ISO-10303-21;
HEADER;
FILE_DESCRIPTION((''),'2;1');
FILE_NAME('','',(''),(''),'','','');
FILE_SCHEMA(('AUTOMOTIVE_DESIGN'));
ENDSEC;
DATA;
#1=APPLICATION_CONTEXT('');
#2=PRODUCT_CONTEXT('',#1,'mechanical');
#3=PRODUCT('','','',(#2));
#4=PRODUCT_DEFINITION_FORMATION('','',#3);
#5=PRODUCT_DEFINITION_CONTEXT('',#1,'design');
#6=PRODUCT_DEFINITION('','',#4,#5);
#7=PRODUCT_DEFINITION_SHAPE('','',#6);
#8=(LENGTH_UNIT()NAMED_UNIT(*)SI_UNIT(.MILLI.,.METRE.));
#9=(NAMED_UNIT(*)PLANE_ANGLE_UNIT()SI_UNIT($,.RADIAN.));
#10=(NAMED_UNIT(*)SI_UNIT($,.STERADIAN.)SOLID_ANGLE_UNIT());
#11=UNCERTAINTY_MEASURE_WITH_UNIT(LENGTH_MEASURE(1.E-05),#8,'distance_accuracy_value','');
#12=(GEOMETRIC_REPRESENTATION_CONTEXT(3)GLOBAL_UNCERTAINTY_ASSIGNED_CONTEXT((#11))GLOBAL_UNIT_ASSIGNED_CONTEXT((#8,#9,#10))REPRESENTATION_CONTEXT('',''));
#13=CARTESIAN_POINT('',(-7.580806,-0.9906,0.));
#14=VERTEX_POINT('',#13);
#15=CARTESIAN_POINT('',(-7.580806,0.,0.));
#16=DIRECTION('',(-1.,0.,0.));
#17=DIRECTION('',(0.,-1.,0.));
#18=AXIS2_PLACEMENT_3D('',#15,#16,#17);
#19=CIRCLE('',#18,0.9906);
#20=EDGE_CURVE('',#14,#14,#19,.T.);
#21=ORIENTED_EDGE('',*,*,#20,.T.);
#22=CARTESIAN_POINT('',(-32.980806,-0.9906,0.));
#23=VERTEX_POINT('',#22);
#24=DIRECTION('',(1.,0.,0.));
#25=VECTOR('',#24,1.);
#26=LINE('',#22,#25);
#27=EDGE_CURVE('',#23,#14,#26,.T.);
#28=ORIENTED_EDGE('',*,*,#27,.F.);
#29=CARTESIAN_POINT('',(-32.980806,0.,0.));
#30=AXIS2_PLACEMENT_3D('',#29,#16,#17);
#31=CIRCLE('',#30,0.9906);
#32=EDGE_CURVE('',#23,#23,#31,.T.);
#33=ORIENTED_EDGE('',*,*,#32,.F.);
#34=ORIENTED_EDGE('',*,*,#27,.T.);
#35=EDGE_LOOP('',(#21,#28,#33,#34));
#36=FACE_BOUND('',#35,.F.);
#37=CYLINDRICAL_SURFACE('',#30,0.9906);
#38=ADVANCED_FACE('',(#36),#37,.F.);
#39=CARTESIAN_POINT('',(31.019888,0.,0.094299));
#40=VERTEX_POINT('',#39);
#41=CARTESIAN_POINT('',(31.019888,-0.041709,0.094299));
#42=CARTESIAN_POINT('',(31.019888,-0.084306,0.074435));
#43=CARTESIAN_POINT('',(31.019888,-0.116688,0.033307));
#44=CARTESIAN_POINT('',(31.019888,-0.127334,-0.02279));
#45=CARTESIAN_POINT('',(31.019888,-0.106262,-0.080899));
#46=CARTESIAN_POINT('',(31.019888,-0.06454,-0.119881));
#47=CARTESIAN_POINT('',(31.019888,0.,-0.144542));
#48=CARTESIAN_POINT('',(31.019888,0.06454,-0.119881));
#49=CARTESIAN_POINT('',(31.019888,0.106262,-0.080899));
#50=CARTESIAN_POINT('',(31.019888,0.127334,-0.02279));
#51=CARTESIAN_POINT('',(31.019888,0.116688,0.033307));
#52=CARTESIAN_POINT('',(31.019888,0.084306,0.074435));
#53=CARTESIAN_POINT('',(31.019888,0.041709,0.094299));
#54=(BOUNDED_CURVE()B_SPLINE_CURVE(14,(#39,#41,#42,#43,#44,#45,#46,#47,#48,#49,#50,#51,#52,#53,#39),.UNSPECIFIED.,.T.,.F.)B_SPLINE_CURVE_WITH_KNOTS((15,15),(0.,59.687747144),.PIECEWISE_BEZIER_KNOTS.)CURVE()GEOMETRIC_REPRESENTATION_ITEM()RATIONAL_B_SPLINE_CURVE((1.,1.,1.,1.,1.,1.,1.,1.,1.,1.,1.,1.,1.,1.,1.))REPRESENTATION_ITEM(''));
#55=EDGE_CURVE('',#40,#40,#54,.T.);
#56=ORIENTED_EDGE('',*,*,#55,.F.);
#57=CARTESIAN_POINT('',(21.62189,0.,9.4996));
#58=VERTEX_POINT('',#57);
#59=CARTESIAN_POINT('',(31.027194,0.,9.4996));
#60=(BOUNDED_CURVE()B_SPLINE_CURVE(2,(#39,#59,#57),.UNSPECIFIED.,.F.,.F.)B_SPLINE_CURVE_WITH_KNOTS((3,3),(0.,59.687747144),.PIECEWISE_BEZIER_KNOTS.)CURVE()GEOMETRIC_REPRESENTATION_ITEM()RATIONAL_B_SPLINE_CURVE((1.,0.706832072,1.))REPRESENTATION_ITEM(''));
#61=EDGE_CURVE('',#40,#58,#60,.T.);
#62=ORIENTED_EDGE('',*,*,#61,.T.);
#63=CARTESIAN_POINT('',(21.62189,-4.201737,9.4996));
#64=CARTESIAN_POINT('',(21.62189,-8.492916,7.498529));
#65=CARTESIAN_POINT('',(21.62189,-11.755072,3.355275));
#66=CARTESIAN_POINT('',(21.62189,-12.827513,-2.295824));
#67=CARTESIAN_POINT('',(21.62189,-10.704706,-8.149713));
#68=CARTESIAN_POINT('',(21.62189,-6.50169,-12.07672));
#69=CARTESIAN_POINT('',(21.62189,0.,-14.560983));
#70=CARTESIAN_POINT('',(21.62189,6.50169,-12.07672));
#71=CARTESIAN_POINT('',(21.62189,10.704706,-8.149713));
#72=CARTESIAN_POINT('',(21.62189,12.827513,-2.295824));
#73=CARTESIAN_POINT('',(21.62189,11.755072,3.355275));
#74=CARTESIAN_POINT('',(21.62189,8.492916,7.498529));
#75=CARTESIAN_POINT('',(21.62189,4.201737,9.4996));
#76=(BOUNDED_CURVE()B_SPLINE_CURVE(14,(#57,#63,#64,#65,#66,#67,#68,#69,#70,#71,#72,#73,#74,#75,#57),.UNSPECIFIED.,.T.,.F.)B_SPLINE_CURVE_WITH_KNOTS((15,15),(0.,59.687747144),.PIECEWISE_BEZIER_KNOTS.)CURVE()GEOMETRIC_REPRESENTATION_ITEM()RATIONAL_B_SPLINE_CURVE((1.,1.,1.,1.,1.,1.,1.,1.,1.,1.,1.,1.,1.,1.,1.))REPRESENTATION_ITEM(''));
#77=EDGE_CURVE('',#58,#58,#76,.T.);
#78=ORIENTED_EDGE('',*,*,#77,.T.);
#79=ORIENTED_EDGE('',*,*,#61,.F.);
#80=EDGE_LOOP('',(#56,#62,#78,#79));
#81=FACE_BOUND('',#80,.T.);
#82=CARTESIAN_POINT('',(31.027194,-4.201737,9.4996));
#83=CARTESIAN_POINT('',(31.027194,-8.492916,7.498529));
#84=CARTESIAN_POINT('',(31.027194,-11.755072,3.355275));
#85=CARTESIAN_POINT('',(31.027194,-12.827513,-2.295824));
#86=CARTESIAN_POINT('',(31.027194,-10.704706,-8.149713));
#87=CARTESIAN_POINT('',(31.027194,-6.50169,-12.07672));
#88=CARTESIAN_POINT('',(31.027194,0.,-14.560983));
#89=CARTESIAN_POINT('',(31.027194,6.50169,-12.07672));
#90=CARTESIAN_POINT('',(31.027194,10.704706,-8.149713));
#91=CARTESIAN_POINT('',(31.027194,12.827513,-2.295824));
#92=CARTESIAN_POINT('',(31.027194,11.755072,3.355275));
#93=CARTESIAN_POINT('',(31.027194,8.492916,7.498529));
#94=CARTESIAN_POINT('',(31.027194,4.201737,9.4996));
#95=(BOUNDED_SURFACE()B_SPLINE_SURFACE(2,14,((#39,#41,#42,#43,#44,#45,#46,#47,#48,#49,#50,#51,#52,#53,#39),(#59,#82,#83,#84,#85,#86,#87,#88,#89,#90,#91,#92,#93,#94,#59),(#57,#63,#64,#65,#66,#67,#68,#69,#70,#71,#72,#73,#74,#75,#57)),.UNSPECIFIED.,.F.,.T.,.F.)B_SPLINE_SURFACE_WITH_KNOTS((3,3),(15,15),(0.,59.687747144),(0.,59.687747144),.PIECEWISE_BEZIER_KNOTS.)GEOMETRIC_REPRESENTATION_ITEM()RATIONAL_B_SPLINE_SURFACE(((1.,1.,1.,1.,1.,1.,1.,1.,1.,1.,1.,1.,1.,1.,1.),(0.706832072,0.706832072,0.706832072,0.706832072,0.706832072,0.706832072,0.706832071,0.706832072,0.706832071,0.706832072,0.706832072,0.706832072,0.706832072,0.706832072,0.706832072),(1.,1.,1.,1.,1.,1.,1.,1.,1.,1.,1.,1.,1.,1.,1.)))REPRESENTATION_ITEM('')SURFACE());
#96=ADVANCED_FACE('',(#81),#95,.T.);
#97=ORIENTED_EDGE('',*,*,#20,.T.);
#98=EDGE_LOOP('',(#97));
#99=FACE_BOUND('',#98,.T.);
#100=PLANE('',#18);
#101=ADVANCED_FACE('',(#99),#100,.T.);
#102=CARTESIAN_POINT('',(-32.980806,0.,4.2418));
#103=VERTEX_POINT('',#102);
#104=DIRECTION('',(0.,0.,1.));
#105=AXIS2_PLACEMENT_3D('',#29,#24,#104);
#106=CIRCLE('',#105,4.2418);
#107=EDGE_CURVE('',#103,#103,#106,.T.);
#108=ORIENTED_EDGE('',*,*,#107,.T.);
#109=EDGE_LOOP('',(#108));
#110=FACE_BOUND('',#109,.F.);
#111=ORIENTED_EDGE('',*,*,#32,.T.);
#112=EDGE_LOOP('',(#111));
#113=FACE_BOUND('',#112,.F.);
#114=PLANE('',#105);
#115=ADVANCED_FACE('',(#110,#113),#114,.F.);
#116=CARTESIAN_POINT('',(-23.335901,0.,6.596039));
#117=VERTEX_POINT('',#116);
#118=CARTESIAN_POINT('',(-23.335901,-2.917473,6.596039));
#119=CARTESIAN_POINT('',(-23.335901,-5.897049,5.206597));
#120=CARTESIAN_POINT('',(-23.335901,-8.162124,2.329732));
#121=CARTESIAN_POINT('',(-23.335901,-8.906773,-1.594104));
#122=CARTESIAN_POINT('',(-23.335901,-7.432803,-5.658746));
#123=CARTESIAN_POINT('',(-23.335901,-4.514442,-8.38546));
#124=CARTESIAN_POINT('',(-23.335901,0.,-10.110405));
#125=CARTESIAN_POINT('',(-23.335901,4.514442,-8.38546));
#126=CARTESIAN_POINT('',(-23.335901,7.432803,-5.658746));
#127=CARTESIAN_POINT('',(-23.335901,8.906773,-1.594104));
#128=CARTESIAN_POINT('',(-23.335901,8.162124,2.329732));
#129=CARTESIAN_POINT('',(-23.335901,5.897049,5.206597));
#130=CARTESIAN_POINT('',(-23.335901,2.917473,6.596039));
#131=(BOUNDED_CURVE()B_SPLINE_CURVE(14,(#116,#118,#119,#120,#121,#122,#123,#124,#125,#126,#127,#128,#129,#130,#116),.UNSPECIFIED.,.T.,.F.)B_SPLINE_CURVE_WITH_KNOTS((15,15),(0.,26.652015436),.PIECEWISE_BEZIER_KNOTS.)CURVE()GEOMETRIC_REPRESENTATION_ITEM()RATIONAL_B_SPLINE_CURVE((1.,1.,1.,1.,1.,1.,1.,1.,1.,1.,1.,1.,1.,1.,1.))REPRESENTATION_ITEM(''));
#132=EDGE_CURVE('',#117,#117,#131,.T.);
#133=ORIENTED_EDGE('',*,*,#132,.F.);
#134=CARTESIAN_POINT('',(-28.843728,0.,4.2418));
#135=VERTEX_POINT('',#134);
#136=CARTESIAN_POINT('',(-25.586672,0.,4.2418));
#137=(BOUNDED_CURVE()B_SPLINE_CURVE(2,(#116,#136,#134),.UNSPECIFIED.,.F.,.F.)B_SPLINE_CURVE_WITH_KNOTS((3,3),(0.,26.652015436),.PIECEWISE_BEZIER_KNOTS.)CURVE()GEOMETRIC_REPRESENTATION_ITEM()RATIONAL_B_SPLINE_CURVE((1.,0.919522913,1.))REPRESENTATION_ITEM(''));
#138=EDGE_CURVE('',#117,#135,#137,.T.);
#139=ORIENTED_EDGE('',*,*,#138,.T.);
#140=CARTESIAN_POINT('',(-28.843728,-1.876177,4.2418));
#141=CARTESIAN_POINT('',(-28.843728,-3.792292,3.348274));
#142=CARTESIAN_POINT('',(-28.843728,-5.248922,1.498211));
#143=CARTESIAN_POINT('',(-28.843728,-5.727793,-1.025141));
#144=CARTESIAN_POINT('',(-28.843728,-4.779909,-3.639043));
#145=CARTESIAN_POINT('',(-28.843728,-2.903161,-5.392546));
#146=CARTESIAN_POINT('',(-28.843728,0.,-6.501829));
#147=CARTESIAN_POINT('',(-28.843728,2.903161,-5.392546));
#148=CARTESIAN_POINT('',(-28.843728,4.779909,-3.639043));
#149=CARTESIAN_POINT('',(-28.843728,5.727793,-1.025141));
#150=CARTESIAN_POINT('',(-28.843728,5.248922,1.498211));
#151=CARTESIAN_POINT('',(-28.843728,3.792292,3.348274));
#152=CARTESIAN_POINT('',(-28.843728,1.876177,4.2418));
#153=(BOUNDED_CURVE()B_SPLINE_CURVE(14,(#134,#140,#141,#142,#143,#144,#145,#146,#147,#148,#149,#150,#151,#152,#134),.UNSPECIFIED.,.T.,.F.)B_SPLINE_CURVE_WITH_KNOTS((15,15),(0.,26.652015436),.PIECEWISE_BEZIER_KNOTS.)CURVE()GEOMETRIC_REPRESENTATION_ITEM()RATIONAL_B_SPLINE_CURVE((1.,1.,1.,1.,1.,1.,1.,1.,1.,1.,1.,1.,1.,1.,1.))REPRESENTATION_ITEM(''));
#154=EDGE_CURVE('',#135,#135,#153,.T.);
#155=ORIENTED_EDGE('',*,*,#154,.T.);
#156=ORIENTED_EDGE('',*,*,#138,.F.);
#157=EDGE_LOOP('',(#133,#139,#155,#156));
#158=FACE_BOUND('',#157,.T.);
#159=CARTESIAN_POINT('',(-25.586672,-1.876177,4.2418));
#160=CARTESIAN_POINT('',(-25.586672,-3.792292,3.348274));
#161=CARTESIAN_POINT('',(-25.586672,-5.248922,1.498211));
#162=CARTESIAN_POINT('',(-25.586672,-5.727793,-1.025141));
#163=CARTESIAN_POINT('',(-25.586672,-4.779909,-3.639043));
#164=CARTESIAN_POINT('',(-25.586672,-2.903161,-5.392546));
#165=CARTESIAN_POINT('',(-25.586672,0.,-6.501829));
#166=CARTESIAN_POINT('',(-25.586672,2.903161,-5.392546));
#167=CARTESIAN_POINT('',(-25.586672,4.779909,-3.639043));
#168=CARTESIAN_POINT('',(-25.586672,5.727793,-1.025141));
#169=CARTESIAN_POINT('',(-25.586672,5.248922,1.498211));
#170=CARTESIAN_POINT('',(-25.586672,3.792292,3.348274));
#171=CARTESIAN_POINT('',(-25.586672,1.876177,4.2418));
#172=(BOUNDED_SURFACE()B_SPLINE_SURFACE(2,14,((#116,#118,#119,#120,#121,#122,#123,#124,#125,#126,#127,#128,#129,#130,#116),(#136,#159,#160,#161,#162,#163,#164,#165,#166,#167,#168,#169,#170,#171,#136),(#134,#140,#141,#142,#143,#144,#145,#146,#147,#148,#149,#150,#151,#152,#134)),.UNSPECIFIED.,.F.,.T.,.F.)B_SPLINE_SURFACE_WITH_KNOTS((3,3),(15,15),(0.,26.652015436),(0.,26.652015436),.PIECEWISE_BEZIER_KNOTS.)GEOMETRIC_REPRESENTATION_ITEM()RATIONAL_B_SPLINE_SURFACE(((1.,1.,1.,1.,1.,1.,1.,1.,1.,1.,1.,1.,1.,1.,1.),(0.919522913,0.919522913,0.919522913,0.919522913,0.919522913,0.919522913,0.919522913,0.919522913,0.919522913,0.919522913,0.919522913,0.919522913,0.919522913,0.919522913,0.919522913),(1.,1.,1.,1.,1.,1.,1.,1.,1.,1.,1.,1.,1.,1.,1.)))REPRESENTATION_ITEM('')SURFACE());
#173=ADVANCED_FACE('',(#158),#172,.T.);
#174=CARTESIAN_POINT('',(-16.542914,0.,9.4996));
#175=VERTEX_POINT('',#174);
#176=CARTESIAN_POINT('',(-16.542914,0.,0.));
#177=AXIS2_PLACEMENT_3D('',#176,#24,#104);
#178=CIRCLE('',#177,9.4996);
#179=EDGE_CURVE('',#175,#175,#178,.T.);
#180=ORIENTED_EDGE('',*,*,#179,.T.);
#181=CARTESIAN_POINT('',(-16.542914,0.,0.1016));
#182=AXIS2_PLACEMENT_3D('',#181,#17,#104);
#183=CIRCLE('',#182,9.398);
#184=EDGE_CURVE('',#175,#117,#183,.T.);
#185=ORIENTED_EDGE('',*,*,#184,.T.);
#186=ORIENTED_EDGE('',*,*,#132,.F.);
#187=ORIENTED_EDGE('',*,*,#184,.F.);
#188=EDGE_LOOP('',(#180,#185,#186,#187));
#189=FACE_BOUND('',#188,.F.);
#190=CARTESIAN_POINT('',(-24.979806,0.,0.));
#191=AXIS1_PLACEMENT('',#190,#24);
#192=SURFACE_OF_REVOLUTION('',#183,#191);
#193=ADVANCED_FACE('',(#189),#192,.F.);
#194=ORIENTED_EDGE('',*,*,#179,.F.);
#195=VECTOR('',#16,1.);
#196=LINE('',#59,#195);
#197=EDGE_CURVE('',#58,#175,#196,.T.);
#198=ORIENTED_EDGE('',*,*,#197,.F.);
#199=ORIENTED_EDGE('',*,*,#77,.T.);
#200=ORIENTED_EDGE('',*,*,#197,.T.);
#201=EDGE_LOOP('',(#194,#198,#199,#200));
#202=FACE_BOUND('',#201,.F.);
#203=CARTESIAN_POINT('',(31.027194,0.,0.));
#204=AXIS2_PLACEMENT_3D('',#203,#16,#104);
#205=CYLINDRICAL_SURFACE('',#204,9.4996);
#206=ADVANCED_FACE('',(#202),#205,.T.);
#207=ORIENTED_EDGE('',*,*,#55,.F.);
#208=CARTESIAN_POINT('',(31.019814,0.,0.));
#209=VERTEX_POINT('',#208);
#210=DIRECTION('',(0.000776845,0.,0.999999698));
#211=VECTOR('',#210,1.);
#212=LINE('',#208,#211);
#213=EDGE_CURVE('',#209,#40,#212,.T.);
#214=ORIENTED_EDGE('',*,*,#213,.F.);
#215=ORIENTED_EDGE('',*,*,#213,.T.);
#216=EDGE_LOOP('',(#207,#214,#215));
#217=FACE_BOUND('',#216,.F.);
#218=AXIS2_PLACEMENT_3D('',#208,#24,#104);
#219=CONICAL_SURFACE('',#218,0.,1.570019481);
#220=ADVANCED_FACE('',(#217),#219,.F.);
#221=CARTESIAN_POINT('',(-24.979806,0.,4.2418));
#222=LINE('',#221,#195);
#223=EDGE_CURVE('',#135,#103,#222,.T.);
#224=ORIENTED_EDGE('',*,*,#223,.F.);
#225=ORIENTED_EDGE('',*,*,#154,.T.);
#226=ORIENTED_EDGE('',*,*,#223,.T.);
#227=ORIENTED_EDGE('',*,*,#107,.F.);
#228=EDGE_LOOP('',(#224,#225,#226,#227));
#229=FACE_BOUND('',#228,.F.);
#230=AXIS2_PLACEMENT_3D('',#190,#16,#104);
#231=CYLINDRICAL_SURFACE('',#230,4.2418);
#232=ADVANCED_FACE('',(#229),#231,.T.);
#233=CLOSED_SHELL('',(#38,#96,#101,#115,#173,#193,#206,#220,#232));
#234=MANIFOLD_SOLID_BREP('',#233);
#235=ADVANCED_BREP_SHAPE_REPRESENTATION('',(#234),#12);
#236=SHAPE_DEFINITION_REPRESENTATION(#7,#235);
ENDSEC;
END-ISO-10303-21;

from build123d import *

# Parameters (mm, degrees)
F2_R     = 9.398
F4_R     = 7.62
F5_R     = 0.9906
F6_DEPTH = 25.4


# Not quite as in the source:
# - a fillet or chamfer that OpenCascade refuses, or shapes differently, is made with other operations: its cross-section is extruded or revolved along the edge and cut away or added


with BuildPart() as f1:
    # F0 (on Front) → F1 (revolve)
    with BuildSketch(Plane.XZ):
        Polygon((-32.9808058875, 0), (0, 0), (31.0198143902, 0), (31.0271941125, 9.4996), (-24.9798058875, 9.4996), (-24.9798058875, 4.2418), (-32.9808058875, 4.2418), align=None)
    revolve(axis=Axis((15.5099071951, 0, 0), (1, 0, 0)))

    # F2
    f2_edges = [f1.edges().sort_by_distance(p)[0] for p in [
        (31.027194, 0, -9.4996),
        (31.023504, 0, 4.7498),
    ]]
    fillet(f2_edges, radius=F2_R)

    # F3: fillet of radius 9.398 on 1 edges, made by hand

    # F3_s1 → F3_t2 (revolve, cut)
    with BuildSketch(Plane.XZ):
        with BuildLine():
            ThreePointArc((-16.542913808, 9.4996), (-21.5134673185, 8.0775640044), (-24.9798058875, 4.2418))
            Line((-24.9798058875, 4.2418), (-24.9798058875, 9.4996))
            Line((-24.9798058875, 9.4996), (-16.542913808, 9.4996))
        make_face()
    revolve(axis=Axis((-24.9798058875, 0, 0), (1, 0, 0)), mode=Mode.SUBTRACT)

    # F4
    f4_edges = [f1.edges().sort_by_distance(p)[0] for p in [
        (-24.979806, 0, -4.2418),
    ]]
    fillet(f4_edges, radius=F4_R)

    # F5 (on face) → F6 (cut)
    with BuildSketch(Plane(origin=(-32.9808058875, 0, 0), x_dir=(0, -1, 0), z_dir=(-1, 0, 0))):
        Circle(F5_R)
    extrude(amount=-F6_DEPTH, mode=Mode.SUBTRACT)


solid = f1.part
